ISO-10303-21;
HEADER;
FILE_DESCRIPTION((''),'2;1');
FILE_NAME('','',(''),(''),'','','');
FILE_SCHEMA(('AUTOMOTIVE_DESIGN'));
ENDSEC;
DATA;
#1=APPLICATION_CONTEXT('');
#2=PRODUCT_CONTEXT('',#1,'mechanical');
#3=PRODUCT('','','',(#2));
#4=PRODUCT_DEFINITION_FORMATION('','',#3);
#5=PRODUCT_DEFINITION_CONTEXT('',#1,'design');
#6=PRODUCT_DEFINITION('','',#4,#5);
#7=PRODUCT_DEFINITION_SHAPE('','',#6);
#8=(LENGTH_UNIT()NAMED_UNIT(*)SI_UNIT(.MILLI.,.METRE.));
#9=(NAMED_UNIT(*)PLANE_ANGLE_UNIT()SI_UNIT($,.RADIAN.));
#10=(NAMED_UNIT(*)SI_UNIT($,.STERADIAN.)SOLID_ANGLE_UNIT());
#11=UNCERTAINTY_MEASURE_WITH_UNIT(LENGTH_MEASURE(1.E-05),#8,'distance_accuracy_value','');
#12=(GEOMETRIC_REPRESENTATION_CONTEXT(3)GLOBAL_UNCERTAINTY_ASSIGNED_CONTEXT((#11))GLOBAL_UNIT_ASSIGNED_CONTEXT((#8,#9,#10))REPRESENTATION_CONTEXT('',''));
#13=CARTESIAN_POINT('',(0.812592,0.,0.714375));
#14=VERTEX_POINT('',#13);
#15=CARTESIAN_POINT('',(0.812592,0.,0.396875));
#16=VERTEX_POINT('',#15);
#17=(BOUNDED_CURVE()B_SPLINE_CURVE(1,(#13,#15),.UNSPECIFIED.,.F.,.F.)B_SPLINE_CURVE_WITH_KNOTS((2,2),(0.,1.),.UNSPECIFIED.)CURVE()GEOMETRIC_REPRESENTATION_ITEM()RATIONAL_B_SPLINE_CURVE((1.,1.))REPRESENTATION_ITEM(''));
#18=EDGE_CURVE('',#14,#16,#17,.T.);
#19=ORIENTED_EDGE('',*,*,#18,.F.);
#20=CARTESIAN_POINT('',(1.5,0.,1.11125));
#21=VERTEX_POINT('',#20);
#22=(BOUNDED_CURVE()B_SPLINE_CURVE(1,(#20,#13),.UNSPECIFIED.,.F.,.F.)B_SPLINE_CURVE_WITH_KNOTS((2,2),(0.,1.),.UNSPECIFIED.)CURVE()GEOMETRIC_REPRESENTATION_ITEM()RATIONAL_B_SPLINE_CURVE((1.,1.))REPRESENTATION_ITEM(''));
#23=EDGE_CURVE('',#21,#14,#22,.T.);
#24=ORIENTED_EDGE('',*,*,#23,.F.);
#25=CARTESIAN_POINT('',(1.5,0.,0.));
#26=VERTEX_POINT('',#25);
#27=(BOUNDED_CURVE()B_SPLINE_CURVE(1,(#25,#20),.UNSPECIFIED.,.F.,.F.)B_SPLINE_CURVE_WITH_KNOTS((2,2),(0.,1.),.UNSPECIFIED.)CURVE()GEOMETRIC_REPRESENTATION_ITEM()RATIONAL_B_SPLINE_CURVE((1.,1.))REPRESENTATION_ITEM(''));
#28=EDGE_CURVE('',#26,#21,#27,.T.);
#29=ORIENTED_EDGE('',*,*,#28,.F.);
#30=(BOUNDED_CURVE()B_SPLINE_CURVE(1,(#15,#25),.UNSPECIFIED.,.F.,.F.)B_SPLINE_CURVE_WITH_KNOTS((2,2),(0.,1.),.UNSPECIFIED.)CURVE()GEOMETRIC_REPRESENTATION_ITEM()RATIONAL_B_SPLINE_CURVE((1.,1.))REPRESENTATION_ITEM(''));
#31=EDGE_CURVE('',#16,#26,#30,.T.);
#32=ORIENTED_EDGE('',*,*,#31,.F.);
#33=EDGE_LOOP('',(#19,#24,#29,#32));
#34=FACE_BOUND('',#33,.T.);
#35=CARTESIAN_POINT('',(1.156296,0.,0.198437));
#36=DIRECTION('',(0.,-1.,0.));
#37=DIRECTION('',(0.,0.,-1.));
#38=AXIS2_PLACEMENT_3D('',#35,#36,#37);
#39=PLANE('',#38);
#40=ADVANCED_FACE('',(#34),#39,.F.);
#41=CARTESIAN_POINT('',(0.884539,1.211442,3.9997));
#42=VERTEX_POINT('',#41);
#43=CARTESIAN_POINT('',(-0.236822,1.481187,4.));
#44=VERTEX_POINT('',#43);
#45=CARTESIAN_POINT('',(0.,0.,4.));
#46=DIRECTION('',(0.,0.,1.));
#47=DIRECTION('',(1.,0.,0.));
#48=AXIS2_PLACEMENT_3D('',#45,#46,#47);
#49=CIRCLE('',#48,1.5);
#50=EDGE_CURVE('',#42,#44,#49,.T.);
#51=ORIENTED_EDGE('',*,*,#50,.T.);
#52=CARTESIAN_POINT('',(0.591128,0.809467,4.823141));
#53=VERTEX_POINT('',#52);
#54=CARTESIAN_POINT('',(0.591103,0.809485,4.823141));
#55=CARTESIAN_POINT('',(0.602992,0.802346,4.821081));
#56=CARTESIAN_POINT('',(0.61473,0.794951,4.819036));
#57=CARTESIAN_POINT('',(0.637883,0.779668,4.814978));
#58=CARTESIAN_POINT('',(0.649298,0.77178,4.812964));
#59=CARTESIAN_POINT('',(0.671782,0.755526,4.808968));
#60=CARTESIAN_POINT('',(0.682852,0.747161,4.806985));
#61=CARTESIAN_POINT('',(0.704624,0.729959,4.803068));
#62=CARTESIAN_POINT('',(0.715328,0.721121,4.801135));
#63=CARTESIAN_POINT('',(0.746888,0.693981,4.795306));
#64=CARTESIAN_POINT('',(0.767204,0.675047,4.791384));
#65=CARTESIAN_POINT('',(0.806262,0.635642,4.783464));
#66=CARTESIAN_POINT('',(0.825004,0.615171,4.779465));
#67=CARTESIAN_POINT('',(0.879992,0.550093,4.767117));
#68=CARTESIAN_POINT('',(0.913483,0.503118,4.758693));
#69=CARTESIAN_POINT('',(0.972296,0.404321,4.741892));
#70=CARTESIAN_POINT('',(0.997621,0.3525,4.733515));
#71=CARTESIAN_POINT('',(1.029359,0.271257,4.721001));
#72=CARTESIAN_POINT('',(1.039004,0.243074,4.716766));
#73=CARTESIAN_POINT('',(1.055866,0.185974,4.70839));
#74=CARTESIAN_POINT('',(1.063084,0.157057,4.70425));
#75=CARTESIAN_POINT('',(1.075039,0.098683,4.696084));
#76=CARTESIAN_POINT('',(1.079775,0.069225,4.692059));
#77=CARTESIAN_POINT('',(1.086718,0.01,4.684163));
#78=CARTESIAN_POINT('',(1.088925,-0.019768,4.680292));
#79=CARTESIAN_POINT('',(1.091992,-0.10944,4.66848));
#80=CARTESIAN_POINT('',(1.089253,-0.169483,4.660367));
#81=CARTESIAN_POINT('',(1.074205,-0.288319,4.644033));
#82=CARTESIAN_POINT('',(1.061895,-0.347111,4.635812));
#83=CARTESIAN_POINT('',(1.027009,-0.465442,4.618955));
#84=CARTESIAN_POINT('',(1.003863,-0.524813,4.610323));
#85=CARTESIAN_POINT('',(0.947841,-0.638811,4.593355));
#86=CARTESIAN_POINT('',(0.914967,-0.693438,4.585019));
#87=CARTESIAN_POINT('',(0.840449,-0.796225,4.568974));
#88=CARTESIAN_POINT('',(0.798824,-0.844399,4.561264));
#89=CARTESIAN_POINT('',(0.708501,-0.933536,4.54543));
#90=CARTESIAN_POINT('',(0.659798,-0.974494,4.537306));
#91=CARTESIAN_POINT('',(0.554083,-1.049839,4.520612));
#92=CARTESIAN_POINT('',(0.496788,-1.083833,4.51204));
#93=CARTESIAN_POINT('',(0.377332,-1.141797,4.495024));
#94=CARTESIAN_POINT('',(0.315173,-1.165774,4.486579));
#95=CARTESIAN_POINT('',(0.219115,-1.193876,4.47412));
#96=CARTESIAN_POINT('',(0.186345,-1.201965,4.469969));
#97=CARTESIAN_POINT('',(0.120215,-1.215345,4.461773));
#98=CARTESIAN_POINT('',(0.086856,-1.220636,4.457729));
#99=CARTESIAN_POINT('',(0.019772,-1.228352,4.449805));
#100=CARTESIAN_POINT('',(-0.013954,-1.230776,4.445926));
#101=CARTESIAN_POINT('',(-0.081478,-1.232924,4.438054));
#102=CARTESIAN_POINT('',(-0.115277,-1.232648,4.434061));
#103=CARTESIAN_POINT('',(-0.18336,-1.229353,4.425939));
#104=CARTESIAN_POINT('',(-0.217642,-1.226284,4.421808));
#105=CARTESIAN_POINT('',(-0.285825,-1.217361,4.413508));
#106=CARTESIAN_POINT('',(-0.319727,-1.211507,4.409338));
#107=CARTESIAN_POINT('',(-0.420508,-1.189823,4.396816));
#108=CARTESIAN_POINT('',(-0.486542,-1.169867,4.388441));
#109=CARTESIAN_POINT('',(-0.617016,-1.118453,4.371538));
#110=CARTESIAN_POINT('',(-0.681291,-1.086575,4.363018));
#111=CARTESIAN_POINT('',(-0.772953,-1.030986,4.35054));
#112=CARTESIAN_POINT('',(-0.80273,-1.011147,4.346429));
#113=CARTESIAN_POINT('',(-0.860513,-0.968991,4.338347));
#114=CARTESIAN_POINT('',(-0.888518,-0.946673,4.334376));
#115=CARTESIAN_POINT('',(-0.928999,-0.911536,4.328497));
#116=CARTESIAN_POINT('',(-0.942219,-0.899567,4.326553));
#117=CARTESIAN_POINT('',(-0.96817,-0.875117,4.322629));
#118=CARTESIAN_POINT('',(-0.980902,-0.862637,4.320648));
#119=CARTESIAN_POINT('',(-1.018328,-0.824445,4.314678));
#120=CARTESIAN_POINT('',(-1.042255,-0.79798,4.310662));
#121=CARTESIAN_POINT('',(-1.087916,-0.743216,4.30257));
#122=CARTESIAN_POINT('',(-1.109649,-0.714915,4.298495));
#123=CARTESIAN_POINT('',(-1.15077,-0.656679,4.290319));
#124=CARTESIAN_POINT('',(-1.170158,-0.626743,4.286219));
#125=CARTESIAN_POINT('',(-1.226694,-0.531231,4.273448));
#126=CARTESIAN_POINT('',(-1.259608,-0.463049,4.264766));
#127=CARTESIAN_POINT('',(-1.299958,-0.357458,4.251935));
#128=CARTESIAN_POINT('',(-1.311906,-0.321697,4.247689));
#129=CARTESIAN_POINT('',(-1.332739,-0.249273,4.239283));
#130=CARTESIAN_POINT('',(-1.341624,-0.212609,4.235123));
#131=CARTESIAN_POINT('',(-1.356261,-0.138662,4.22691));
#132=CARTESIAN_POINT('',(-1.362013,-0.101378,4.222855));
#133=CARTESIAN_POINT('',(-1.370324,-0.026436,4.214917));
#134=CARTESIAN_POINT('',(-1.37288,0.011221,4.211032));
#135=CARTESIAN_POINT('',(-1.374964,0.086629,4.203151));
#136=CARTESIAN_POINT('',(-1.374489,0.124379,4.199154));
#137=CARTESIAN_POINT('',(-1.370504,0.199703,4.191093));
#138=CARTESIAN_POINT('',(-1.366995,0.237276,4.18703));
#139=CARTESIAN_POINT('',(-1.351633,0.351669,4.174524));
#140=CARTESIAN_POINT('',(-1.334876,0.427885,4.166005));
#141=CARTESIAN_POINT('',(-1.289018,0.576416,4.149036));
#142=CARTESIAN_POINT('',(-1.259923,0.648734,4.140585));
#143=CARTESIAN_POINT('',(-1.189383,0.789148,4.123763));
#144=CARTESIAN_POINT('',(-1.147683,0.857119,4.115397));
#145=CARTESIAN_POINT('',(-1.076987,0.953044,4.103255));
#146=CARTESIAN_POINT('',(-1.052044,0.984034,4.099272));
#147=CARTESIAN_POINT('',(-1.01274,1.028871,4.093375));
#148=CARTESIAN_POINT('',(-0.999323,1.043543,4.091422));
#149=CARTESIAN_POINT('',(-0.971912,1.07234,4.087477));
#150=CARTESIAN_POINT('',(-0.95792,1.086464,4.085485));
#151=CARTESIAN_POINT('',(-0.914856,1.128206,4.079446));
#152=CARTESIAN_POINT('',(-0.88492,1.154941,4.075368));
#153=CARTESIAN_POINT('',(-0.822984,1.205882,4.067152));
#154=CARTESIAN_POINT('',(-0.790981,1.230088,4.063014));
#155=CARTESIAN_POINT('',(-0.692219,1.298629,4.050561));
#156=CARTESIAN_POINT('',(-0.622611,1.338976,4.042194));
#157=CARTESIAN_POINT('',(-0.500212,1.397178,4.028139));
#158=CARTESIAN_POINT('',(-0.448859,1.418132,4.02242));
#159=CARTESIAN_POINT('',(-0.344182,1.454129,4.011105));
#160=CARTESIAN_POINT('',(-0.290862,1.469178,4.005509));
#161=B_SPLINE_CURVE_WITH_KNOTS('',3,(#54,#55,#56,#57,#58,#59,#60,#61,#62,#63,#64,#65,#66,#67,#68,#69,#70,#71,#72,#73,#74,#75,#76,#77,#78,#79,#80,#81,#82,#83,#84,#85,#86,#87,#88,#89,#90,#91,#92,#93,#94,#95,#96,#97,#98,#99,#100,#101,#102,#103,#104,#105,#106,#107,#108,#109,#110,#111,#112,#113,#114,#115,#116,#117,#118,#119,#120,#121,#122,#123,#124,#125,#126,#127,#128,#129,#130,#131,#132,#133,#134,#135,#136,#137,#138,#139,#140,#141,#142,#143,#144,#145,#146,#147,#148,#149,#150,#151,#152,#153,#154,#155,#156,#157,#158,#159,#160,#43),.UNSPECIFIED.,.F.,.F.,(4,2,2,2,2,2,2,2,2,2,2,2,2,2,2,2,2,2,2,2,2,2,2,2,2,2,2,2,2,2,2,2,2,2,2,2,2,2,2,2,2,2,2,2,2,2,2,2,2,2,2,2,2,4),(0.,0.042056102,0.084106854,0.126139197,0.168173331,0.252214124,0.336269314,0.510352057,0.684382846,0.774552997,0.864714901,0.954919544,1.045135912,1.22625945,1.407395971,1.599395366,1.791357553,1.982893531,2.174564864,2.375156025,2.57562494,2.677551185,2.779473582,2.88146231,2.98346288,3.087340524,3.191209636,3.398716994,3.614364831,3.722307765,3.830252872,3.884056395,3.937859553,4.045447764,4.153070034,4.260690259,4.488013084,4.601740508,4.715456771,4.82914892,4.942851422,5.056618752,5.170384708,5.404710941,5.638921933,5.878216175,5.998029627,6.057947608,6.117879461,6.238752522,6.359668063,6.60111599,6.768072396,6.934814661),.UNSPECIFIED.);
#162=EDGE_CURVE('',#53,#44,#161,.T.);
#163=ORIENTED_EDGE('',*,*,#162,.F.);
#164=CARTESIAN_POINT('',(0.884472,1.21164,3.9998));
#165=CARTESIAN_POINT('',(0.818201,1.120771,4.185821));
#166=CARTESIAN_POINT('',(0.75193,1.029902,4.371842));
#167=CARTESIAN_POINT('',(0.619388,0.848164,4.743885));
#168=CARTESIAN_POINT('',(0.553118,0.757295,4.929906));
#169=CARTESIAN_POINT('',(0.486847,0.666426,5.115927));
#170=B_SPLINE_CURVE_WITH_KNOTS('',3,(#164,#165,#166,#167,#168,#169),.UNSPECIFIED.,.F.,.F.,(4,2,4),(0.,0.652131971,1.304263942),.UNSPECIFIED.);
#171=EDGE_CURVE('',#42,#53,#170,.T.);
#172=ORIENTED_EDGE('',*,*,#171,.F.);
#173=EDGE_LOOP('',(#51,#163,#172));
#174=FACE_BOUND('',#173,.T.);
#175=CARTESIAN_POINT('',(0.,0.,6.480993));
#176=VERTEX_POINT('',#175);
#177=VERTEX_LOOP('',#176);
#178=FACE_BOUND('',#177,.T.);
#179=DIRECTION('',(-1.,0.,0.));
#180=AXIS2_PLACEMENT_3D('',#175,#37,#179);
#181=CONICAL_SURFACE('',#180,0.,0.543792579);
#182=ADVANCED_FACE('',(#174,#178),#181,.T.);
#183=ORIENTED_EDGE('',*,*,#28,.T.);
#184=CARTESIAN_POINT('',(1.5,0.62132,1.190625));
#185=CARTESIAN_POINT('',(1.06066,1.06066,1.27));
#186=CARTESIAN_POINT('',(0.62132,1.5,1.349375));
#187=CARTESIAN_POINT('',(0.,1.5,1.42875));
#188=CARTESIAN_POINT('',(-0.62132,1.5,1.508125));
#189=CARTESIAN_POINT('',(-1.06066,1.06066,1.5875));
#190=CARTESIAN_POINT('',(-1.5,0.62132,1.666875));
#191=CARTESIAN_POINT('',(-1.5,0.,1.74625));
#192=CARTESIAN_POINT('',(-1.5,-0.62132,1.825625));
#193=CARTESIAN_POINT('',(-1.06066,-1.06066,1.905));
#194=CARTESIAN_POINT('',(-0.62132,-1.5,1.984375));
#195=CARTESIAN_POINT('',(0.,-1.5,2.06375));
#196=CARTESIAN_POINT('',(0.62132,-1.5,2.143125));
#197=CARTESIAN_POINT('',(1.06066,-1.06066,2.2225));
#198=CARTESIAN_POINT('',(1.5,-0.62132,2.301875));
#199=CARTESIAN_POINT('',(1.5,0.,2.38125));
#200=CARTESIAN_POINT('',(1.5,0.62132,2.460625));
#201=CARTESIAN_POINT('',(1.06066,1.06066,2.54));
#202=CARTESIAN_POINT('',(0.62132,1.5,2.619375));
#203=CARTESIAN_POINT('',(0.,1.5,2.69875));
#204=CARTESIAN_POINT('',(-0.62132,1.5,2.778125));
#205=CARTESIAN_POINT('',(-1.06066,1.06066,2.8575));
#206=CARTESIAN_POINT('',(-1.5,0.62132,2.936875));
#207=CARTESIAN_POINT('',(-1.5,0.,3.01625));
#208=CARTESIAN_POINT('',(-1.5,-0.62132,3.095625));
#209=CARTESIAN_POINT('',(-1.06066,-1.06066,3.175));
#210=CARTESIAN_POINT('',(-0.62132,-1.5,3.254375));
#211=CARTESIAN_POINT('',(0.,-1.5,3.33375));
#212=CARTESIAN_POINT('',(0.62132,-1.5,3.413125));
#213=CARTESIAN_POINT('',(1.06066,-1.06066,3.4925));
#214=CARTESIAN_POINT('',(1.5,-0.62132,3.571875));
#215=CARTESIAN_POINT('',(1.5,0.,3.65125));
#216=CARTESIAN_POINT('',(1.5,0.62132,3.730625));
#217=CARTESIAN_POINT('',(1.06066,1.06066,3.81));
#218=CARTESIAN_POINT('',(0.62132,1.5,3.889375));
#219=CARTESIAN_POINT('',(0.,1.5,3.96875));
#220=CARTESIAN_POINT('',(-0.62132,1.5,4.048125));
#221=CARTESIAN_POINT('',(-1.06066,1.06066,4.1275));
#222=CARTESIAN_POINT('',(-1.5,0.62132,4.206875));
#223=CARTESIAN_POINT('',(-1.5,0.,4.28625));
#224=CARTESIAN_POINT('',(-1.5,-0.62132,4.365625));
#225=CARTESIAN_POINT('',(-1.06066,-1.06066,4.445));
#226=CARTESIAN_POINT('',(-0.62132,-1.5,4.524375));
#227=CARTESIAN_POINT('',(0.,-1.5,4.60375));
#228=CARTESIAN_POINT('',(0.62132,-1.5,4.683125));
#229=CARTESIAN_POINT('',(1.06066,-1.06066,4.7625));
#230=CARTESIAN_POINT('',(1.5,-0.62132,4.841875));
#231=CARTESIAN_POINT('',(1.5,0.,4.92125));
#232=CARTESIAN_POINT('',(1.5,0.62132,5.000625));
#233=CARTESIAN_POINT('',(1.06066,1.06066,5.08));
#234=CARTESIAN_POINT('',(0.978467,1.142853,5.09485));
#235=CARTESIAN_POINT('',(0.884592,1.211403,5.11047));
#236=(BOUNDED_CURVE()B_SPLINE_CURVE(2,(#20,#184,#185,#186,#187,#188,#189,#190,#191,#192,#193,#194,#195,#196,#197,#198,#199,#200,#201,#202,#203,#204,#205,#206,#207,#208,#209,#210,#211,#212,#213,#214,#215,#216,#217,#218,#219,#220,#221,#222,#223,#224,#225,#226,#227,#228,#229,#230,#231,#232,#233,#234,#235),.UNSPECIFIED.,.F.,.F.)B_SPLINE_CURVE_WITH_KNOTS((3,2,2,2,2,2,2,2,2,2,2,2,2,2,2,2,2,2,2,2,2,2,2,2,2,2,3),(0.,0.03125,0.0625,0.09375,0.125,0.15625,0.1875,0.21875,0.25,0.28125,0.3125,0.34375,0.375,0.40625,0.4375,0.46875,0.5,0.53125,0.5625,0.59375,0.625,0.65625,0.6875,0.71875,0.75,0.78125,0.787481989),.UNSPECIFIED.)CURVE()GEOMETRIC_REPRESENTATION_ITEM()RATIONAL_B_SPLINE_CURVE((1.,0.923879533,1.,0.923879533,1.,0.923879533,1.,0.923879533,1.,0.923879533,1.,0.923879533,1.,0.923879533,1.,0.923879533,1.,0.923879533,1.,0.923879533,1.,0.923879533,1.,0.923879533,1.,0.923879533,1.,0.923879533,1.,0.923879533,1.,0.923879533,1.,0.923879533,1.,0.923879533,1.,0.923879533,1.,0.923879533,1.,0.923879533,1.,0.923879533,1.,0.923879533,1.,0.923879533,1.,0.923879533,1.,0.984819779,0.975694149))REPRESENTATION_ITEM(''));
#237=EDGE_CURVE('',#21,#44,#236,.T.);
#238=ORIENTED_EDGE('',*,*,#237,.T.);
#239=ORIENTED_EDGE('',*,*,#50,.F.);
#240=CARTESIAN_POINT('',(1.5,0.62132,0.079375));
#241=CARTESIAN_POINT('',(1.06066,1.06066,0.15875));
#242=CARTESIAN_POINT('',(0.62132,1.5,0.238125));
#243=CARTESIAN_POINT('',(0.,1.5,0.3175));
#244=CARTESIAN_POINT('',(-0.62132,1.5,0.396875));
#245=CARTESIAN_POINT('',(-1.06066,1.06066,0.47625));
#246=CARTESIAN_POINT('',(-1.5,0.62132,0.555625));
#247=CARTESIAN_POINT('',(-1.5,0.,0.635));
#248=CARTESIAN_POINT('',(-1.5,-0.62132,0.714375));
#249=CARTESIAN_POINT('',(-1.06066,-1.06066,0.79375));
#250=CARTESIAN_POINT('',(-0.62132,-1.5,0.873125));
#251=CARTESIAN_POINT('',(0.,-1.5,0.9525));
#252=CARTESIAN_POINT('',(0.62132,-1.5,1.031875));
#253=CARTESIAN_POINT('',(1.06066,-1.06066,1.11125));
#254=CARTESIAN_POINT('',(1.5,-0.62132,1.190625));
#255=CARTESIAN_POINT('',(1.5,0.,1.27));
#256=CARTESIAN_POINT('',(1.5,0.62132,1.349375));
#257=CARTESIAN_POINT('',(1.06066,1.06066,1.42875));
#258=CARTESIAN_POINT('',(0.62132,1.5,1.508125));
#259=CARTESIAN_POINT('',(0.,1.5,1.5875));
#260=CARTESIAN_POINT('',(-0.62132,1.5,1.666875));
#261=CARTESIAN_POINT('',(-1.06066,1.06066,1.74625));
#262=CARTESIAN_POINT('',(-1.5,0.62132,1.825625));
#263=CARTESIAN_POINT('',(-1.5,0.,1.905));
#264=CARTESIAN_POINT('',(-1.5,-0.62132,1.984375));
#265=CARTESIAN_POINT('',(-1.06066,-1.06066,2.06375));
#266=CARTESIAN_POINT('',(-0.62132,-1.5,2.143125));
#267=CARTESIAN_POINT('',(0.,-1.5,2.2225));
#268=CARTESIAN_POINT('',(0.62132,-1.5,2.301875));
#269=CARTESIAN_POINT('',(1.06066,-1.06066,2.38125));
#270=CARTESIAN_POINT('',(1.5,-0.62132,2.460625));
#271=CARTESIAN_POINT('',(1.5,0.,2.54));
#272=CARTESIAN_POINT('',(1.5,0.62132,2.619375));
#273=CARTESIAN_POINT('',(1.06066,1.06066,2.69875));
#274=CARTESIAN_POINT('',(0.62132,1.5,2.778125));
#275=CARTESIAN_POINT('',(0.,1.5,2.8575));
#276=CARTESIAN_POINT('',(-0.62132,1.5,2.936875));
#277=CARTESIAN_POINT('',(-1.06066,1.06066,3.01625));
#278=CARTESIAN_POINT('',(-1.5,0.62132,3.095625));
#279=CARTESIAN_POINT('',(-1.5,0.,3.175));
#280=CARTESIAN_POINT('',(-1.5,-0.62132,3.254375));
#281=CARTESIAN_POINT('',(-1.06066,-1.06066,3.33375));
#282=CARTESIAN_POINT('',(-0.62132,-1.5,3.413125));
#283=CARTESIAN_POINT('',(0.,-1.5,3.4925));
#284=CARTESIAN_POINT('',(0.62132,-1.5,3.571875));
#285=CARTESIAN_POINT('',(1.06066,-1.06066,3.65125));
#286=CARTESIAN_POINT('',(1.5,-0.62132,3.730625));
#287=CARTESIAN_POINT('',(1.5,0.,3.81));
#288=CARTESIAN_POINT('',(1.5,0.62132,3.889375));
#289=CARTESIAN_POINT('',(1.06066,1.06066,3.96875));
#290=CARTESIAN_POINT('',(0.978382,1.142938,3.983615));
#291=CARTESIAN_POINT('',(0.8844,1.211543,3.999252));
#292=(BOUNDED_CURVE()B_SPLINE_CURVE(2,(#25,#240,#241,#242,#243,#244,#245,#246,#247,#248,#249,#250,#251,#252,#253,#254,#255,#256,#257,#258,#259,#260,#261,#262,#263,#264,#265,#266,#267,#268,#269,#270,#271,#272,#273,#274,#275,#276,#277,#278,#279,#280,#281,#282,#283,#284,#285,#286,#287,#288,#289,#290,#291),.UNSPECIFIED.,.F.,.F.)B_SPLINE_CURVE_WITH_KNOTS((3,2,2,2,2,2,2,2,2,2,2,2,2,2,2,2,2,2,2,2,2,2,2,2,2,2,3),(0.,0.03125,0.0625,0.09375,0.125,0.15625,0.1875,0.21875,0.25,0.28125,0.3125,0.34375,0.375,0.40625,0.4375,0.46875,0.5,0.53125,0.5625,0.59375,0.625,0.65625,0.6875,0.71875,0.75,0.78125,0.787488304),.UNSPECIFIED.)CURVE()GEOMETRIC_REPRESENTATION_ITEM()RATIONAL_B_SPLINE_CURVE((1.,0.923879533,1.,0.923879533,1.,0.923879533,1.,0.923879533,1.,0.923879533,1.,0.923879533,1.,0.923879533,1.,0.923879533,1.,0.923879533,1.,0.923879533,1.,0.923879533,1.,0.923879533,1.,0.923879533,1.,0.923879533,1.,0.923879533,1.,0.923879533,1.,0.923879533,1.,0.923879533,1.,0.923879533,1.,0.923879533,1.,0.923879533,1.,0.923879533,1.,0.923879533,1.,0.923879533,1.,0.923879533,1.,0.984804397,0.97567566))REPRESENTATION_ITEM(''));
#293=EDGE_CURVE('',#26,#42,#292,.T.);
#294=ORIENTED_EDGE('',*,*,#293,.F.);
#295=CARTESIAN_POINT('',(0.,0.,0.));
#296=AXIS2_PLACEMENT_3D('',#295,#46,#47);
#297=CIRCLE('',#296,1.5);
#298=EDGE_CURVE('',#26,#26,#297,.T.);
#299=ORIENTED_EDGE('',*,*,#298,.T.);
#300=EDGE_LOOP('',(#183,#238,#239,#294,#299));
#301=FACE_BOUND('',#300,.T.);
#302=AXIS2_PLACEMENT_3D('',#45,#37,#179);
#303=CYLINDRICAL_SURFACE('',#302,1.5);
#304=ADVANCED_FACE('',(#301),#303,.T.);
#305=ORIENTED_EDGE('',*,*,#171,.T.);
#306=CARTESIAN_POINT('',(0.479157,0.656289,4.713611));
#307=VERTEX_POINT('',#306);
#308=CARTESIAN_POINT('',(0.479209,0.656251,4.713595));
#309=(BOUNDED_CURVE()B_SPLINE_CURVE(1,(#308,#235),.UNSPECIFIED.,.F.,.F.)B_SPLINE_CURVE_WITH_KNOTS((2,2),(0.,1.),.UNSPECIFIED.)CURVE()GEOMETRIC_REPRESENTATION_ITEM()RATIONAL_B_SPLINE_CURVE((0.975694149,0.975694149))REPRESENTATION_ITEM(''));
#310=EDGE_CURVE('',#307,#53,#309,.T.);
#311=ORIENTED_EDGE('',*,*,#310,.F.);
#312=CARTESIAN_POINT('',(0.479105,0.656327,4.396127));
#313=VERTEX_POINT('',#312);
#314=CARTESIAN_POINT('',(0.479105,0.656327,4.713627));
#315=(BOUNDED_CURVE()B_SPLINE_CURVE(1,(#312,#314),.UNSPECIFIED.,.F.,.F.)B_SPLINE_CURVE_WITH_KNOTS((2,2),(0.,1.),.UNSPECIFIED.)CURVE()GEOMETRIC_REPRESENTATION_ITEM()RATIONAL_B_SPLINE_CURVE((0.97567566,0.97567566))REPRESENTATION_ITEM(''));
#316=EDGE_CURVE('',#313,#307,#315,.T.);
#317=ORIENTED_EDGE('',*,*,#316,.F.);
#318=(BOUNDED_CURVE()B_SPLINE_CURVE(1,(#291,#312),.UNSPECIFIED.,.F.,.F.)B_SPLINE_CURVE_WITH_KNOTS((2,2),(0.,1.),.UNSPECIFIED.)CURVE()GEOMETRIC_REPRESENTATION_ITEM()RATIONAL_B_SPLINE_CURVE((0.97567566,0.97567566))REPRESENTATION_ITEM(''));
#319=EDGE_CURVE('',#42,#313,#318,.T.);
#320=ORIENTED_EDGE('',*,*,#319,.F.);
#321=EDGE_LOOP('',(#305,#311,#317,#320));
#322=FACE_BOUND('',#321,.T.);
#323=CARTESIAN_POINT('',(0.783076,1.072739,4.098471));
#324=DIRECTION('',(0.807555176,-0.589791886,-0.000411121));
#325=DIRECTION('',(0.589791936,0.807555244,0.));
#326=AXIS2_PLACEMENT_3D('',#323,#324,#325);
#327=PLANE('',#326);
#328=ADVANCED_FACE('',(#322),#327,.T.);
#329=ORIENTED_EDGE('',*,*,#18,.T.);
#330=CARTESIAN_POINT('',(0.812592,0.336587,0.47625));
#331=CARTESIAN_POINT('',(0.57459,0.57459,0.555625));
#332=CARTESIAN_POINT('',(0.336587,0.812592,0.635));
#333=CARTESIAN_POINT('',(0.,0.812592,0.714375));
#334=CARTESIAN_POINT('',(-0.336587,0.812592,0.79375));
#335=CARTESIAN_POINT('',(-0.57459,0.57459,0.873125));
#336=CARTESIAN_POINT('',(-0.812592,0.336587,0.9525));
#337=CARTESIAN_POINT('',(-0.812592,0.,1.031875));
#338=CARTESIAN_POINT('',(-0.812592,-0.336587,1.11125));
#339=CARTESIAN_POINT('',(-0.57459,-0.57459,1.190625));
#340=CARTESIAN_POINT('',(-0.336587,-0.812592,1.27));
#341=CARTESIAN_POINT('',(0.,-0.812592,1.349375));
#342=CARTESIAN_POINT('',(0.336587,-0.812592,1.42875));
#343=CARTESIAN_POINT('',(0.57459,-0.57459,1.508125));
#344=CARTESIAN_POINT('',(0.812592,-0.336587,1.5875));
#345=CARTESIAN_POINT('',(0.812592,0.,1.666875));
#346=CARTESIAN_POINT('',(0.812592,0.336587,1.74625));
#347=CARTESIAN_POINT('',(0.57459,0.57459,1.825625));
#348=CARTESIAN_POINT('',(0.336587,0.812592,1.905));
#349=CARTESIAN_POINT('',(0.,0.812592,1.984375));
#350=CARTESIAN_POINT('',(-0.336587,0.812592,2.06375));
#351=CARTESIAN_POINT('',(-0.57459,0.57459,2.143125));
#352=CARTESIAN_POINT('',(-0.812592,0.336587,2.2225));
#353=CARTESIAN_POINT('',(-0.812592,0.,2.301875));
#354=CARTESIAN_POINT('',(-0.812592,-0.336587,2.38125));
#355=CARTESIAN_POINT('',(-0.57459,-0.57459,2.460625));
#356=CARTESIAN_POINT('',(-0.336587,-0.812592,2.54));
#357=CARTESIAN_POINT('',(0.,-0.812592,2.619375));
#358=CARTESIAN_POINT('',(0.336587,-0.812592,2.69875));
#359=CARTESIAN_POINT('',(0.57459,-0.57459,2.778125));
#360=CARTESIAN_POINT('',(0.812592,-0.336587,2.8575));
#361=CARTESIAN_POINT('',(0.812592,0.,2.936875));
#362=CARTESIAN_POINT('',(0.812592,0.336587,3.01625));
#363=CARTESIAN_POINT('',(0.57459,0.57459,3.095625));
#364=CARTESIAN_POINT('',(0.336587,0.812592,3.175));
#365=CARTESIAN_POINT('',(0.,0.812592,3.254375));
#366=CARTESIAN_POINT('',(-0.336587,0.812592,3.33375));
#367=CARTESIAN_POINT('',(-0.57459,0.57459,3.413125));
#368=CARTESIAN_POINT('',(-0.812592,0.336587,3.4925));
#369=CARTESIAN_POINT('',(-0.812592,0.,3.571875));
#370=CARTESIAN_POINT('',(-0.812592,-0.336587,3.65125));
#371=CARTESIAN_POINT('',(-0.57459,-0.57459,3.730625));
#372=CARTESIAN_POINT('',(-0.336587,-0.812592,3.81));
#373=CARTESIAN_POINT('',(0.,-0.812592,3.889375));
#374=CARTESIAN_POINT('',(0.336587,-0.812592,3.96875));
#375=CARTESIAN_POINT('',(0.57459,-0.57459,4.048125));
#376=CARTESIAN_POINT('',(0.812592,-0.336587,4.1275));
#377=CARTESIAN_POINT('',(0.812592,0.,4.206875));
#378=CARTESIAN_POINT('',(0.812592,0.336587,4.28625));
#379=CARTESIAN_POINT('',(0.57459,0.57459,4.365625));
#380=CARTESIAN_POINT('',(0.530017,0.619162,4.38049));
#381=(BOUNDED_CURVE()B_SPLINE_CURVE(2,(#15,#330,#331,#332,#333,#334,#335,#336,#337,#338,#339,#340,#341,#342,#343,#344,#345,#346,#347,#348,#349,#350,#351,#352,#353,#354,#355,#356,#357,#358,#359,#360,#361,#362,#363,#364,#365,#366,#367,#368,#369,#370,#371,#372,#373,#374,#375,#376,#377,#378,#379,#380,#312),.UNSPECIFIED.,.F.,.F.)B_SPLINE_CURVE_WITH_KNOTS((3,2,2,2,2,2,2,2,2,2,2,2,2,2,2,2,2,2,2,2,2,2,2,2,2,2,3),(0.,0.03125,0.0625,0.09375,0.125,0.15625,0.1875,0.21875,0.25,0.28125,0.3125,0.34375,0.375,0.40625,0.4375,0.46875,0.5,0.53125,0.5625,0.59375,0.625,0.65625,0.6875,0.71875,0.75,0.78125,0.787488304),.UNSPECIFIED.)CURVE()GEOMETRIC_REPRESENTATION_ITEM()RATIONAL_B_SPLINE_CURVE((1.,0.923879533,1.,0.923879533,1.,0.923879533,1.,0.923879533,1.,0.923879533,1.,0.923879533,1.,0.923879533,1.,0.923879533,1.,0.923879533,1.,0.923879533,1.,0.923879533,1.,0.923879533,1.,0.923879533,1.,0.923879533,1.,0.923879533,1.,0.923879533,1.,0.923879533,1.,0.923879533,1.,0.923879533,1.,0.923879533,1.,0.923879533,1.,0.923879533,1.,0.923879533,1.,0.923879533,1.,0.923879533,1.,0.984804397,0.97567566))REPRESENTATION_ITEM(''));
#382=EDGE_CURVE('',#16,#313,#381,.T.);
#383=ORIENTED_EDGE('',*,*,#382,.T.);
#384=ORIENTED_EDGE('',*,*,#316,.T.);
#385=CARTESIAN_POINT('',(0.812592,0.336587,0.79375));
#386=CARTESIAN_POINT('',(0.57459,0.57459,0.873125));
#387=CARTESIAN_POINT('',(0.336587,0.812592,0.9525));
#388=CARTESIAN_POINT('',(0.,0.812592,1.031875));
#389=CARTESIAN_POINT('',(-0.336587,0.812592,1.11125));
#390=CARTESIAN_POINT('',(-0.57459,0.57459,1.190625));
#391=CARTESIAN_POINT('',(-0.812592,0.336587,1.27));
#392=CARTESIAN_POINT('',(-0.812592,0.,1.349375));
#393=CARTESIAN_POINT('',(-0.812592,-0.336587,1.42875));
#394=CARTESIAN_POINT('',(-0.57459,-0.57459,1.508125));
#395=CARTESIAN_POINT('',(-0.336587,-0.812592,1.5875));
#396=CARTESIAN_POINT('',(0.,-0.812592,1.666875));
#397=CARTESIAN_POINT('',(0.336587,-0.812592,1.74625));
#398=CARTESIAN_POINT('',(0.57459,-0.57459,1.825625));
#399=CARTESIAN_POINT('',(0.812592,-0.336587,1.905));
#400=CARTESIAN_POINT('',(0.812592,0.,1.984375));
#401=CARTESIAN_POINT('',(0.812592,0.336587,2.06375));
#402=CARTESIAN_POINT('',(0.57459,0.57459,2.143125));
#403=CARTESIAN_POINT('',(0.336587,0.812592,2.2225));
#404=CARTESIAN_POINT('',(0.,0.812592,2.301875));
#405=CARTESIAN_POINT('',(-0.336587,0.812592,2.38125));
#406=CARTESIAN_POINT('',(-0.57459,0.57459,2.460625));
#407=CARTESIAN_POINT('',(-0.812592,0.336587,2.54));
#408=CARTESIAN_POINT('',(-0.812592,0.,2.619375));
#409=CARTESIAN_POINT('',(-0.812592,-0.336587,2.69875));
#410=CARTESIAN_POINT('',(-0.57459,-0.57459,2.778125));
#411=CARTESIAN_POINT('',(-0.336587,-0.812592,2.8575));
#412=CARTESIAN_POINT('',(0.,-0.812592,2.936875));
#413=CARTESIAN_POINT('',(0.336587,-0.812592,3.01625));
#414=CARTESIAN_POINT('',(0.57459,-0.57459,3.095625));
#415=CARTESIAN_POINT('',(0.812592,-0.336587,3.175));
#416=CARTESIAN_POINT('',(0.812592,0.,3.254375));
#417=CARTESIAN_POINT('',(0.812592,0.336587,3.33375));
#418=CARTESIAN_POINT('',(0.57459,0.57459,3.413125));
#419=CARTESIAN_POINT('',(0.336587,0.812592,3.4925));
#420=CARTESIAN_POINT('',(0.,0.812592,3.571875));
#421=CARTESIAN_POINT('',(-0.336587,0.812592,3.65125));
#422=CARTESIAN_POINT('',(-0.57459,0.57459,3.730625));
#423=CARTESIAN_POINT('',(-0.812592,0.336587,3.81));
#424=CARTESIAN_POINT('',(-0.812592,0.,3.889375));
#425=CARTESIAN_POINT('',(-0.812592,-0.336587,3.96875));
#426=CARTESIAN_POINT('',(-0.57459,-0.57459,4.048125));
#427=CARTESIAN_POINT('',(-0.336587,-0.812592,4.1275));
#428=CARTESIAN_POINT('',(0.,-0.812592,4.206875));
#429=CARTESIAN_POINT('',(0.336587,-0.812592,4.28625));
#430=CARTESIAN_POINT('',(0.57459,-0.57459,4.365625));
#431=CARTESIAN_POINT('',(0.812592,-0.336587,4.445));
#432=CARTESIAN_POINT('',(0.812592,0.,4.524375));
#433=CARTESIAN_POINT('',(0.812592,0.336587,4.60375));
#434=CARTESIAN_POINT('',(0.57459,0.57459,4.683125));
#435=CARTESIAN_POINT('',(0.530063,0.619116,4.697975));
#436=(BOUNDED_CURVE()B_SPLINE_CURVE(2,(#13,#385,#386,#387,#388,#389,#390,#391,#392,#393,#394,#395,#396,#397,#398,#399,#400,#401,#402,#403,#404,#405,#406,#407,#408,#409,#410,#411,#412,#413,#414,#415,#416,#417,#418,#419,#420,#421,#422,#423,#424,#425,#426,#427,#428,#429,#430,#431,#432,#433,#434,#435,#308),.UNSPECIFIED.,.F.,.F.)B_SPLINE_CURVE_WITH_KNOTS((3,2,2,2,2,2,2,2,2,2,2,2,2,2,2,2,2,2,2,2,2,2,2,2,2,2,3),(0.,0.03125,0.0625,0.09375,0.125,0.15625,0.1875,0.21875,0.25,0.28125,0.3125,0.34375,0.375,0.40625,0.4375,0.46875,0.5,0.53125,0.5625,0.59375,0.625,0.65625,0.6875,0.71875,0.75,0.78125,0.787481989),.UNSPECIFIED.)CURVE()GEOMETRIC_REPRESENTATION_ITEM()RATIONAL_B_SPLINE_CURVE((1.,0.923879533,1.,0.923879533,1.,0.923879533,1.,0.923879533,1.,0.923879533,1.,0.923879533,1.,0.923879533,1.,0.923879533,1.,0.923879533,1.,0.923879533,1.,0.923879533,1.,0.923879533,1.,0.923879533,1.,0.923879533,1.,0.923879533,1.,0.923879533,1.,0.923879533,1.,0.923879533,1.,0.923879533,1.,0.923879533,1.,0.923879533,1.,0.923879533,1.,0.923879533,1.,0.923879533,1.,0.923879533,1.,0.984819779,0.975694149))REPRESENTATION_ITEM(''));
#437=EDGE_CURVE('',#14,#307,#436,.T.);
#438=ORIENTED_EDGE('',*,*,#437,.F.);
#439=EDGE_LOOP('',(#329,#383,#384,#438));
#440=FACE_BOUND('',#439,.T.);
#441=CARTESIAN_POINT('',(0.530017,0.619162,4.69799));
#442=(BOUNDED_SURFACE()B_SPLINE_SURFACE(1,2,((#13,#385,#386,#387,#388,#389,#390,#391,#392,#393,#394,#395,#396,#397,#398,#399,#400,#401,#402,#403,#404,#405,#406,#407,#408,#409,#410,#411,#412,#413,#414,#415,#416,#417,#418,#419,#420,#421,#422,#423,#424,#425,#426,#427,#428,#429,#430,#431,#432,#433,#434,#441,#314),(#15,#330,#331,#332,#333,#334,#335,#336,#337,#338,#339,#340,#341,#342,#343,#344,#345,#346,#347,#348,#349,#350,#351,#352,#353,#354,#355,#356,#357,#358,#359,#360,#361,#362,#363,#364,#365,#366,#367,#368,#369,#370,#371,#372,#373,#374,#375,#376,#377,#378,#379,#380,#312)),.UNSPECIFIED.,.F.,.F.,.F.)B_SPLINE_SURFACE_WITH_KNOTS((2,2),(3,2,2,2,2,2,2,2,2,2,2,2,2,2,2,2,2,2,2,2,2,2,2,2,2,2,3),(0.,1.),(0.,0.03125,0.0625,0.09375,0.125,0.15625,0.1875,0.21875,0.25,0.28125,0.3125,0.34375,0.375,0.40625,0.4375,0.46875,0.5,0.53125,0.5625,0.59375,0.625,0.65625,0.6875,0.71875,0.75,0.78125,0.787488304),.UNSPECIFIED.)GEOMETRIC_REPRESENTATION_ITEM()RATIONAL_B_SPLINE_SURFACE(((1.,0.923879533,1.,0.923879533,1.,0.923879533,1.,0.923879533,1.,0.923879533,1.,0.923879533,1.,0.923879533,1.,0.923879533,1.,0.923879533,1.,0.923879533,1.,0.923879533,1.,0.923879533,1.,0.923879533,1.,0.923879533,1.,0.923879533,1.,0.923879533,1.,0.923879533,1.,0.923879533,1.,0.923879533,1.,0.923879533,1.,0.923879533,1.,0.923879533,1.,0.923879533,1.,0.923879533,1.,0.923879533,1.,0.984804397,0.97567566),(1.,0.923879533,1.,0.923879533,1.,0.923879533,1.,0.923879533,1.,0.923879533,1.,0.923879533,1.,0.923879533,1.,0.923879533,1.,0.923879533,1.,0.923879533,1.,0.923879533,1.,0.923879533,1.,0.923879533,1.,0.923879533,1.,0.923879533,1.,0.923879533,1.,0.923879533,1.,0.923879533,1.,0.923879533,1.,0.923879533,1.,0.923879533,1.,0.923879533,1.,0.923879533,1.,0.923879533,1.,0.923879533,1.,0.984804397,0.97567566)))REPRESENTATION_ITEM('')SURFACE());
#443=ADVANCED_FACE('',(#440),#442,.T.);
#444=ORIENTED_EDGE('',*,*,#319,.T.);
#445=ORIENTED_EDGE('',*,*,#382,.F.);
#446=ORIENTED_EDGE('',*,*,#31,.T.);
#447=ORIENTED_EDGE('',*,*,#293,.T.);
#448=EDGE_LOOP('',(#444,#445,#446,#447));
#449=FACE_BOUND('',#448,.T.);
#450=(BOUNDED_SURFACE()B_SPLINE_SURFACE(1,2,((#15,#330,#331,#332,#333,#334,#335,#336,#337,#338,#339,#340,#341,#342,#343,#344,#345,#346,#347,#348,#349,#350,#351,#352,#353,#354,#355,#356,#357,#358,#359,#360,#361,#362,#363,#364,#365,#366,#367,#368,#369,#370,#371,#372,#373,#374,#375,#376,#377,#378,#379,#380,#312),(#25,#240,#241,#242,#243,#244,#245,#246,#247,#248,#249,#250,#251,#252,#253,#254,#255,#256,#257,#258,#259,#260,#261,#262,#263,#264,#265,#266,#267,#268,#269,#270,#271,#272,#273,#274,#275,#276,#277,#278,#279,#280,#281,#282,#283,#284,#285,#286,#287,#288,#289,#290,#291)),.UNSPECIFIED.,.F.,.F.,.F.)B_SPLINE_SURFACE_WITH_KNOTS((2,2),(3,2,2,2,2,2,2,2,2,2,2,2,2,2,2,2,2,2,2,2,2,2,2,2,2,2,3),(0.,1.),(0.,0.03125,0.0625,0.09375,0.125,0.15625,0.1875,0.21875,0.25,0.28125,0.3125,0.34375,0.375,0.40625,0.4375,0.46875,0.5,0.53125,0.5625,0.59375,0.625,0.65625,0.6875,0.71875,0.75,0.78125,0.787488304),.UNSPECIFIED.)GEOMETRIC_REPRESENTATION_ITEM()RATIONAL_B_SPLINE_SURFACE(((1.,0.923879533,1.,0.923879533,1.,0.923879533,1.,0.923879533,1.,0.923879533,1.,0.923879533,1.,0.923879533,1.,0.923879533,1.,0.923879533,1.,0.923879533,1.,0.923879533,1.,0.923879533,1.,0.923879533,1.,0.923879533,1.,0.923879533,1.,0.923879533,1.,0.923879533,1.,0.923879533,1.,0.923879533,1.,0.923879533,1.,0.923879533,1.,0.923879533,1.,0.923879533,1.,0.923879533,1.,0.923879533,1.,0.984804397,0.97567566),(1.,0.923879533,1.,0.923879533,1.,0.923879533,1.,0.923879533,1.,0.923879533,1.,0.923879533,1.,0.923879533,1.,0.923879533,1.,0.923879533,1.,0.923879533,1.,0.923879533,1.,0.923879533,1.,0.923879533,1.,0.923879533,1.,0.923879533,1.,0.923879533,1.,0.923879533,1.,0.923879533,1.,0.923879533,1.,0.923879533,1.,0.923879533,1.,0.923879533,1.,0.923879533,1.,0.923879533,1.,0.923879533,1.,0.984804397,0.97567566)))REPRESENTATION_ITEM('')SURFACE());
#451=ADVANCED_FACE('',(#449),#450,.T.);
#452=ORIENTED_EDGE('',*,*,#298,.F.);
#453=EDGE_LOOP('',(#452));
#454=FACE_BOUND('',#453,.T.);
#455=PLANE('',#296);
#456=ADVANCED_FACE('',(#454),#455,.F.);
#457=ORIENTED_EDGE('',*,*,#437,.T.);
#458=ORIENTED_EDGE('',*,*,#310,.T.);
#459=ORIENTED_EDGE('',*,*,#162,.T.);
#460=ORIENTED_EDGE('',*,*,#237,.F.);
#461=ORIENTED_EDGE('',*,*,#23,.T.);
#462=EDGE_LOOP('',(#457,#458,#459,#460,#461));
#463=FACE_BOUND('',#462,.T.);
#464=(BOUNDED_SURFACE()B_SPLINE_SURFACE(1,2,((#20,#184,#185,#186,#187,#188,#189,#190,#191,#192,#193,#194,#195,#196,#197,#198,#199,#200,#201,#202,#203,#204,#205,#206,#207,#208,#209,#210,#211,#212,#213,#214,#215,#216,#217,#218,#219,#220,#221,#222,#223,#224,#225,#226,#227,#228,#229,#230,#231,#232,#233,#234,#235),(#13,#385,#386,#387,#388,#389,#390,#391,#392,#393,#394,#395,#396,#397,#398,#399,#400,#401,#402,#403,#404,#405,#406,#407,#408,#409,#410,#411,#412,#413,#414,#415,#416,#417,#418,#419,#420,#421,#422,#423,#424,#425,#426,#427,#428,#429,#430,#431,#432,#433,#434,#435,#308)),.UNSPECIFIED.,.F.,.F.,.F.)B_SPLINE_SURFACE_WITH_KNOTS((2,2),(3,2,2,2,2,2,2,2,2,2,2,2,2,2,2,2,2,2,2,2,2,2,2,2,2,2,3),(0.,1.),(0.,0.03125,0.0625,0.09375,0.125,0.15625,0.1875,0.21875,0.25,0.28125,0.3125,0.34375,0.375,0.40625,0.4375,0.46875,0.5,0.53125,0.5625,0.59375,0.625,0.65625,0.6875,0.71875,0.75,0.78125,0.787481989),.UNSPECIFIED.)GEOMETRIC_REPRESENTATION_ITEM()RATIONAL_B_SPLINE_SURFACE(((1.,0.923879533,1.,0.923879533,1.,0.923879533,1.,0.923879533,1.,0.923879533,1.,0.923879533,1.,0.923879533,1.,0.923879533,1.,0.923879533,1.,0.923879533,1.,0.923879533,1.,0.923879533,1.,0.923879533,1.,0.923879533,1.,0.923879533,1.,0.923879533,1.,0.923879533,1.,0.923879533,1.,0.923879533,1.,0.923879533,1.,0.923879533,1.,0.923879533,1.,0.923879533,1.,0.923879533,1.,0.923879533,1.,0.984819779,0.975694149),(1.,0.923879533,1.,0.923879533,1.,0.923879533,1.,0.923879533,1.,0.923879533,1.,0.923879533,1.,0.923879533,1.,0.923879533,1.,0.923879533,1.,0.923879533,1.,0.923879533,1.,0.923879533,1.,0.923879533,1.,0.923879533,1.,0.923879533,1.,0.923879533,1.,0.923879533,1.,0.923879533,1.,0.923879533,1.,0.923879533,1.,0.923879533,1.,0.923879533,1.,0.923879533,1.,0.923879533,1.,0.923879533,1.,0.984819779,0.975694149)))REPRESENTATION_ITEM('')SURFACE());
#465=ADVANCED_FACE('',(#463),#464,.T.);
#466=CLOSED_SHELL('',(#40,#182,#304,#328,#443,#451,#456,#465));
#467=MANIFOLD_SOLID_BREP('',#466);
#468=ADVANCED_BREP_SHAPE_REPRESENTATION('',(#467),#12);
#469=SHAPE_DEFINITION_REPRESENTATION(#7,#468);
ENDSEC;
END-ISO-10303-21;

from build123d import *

# Parameters (mm, degrees)
SKETCH_1_R      = 1.5
EXTRUDE_1_DEPTH = 4
THREAD_1_PITCH  = 1.27


with BuildPart() as part:
    # Sketch 1 → 凸台-拉伸1 (new body)
    with BuildSketch(Plane.XY):
        Circle(SKETCH_1_R)
    extrude(amount=EXTRUDE_1_DEPTH)

    # 草图2 → 旋转1 (revolve)
    with BuildSketch(Plane(origin=(0, 0, 0), x_dir=(0, 0, -1), z_dir=(1, 0, 0)), mode=Mode.PRIVATE) as revolve_1_sk:
        Polygon((-4, 0), (-6.480992671, 0), (-4, -1.5), align=None)
    revolve(revolve_1_sk.sketch.rotate(Axis((0, 0, 4), (0, 0, 1)), 270), axis=Axis((0, 0, 4), (0, 0, 1)))

    # 螺纹线1: the profile of Sketch 1 2 profile screwed along a right-hand helix of 3.149606 turns, 8 arcs to a turn; built about Z, then put on its axis
    thread_1_z = Axis((0, 0, 0), (0, 0, 1))
    thread_1_corners = [(1.5003, 0, -0.000173205), (1.5003, 0, 1.111423202), (0.812592339, 0, 0.714374998), (0.812592339, 0, 0.396874998)]
    with BuildLine(mode=Mode.PRIVATE) as thread_1_profile:
        Line(thread_1_corners[0], thread_1_corners[1])
        Line(thread_1_corners[1], thread_1_corners[2])
        Line(thread_1_corners[2], thread_1_corners[3])
        Line(thread_1_corners[3], thread_1_corners[0])
    thread_1_cap = Face(thread_1_profile.wire())
    thread_1_turn_angles = [0, 22.5, 45, 67.5, 90, 112.5, 135, 157.5, 180, 202.5, 225, 247.5, 270, 292.5, 315, 337.5, 360]
    thread_1_turn_weights = [1, 0.9238795325112867, 1, 0.9238795325112867, 1, 0.9238795325112867, 1, 0.9238795325112867, 1, 0.9238795325112867, 1, 0.9238795325112867, 1, 0.9238795325112867, 1, 0.9238795325112867, 1]
    thread_1_turn_rails = [Edge.make_bspline([Vector(p[0], p[1], 0).rotate(thread_1_z, thread_1_turn_angles[k]) / thread_1_turn_weights[k] + Vector(0, 0, p[2] + THREAD_1_PITCH * thread_1_turn_angles[k] / 360) for k in range(17)], [0, 0, 0, 1, 1, 2, 2, 3, 3, 4, 4, 5, 5, 6, 6, 7, 7, 8, 8, 8], 2, thread_1_turn_weights) for p in thread_1_corners]
    thread_1_turn_sides = [Face.make_surface_from_curves(thread_1_turn_rails[p[0]], thread_1_turn_rails[p[1]]) for p in [(0, 1), (1, 2), (2, 3), (3, 0)]]
    thread_1_last_angles = [1080, 1102.5, 1125, 1129.429133858, 1133.858267717]
    thread_1_last_weights = [1, 0.9238795325112867, 1, 0.9970136131070448, 1]
    thread_1_last_rails = [Edge.make_bspline([Vector(p[0], p[1], 0).rotate(thread_1_z, thread_1_last_angles[k]) / thread_1_last_weights[k] + Vector(0, 0, p[2] + THREAD_1_PITCH * thread_1_last_angles[k] / 360) for k in range(5)], [0, 0, 0, 1, 1, 2, 2, 2], 2, thread_1_last_weights) for p in thread_1_corners]
    thread_1_last_sides = [Face.make_surface_from_curves(thread_1_last_rails[p[0]], thread_1_last_rails[p[1]]) for p in [(0, 1), (1, 2), (2, 3), (3, 0)]]
    thread_1 = Plane(origin=(0, 0, 0), x_dir=(1, 0, 0), z_dir=(0, 0, 1)) * Solid(Shell([*[p.moved(Location((0, 0, THREAD_1_PITCH * i))) for i in range(3) for p in thread_1_turn_sides], *thread_1_last_sides, thread_1_cap, thread_1_cap.rotate(thread_1_z, 1133.858267717).moved(Location((0, 0, THREAD_1_PITCH * 1133.858267717 / 360)))]))
    add(thread_1, mode=Mode.SUBTRACT)


solid = part.part
